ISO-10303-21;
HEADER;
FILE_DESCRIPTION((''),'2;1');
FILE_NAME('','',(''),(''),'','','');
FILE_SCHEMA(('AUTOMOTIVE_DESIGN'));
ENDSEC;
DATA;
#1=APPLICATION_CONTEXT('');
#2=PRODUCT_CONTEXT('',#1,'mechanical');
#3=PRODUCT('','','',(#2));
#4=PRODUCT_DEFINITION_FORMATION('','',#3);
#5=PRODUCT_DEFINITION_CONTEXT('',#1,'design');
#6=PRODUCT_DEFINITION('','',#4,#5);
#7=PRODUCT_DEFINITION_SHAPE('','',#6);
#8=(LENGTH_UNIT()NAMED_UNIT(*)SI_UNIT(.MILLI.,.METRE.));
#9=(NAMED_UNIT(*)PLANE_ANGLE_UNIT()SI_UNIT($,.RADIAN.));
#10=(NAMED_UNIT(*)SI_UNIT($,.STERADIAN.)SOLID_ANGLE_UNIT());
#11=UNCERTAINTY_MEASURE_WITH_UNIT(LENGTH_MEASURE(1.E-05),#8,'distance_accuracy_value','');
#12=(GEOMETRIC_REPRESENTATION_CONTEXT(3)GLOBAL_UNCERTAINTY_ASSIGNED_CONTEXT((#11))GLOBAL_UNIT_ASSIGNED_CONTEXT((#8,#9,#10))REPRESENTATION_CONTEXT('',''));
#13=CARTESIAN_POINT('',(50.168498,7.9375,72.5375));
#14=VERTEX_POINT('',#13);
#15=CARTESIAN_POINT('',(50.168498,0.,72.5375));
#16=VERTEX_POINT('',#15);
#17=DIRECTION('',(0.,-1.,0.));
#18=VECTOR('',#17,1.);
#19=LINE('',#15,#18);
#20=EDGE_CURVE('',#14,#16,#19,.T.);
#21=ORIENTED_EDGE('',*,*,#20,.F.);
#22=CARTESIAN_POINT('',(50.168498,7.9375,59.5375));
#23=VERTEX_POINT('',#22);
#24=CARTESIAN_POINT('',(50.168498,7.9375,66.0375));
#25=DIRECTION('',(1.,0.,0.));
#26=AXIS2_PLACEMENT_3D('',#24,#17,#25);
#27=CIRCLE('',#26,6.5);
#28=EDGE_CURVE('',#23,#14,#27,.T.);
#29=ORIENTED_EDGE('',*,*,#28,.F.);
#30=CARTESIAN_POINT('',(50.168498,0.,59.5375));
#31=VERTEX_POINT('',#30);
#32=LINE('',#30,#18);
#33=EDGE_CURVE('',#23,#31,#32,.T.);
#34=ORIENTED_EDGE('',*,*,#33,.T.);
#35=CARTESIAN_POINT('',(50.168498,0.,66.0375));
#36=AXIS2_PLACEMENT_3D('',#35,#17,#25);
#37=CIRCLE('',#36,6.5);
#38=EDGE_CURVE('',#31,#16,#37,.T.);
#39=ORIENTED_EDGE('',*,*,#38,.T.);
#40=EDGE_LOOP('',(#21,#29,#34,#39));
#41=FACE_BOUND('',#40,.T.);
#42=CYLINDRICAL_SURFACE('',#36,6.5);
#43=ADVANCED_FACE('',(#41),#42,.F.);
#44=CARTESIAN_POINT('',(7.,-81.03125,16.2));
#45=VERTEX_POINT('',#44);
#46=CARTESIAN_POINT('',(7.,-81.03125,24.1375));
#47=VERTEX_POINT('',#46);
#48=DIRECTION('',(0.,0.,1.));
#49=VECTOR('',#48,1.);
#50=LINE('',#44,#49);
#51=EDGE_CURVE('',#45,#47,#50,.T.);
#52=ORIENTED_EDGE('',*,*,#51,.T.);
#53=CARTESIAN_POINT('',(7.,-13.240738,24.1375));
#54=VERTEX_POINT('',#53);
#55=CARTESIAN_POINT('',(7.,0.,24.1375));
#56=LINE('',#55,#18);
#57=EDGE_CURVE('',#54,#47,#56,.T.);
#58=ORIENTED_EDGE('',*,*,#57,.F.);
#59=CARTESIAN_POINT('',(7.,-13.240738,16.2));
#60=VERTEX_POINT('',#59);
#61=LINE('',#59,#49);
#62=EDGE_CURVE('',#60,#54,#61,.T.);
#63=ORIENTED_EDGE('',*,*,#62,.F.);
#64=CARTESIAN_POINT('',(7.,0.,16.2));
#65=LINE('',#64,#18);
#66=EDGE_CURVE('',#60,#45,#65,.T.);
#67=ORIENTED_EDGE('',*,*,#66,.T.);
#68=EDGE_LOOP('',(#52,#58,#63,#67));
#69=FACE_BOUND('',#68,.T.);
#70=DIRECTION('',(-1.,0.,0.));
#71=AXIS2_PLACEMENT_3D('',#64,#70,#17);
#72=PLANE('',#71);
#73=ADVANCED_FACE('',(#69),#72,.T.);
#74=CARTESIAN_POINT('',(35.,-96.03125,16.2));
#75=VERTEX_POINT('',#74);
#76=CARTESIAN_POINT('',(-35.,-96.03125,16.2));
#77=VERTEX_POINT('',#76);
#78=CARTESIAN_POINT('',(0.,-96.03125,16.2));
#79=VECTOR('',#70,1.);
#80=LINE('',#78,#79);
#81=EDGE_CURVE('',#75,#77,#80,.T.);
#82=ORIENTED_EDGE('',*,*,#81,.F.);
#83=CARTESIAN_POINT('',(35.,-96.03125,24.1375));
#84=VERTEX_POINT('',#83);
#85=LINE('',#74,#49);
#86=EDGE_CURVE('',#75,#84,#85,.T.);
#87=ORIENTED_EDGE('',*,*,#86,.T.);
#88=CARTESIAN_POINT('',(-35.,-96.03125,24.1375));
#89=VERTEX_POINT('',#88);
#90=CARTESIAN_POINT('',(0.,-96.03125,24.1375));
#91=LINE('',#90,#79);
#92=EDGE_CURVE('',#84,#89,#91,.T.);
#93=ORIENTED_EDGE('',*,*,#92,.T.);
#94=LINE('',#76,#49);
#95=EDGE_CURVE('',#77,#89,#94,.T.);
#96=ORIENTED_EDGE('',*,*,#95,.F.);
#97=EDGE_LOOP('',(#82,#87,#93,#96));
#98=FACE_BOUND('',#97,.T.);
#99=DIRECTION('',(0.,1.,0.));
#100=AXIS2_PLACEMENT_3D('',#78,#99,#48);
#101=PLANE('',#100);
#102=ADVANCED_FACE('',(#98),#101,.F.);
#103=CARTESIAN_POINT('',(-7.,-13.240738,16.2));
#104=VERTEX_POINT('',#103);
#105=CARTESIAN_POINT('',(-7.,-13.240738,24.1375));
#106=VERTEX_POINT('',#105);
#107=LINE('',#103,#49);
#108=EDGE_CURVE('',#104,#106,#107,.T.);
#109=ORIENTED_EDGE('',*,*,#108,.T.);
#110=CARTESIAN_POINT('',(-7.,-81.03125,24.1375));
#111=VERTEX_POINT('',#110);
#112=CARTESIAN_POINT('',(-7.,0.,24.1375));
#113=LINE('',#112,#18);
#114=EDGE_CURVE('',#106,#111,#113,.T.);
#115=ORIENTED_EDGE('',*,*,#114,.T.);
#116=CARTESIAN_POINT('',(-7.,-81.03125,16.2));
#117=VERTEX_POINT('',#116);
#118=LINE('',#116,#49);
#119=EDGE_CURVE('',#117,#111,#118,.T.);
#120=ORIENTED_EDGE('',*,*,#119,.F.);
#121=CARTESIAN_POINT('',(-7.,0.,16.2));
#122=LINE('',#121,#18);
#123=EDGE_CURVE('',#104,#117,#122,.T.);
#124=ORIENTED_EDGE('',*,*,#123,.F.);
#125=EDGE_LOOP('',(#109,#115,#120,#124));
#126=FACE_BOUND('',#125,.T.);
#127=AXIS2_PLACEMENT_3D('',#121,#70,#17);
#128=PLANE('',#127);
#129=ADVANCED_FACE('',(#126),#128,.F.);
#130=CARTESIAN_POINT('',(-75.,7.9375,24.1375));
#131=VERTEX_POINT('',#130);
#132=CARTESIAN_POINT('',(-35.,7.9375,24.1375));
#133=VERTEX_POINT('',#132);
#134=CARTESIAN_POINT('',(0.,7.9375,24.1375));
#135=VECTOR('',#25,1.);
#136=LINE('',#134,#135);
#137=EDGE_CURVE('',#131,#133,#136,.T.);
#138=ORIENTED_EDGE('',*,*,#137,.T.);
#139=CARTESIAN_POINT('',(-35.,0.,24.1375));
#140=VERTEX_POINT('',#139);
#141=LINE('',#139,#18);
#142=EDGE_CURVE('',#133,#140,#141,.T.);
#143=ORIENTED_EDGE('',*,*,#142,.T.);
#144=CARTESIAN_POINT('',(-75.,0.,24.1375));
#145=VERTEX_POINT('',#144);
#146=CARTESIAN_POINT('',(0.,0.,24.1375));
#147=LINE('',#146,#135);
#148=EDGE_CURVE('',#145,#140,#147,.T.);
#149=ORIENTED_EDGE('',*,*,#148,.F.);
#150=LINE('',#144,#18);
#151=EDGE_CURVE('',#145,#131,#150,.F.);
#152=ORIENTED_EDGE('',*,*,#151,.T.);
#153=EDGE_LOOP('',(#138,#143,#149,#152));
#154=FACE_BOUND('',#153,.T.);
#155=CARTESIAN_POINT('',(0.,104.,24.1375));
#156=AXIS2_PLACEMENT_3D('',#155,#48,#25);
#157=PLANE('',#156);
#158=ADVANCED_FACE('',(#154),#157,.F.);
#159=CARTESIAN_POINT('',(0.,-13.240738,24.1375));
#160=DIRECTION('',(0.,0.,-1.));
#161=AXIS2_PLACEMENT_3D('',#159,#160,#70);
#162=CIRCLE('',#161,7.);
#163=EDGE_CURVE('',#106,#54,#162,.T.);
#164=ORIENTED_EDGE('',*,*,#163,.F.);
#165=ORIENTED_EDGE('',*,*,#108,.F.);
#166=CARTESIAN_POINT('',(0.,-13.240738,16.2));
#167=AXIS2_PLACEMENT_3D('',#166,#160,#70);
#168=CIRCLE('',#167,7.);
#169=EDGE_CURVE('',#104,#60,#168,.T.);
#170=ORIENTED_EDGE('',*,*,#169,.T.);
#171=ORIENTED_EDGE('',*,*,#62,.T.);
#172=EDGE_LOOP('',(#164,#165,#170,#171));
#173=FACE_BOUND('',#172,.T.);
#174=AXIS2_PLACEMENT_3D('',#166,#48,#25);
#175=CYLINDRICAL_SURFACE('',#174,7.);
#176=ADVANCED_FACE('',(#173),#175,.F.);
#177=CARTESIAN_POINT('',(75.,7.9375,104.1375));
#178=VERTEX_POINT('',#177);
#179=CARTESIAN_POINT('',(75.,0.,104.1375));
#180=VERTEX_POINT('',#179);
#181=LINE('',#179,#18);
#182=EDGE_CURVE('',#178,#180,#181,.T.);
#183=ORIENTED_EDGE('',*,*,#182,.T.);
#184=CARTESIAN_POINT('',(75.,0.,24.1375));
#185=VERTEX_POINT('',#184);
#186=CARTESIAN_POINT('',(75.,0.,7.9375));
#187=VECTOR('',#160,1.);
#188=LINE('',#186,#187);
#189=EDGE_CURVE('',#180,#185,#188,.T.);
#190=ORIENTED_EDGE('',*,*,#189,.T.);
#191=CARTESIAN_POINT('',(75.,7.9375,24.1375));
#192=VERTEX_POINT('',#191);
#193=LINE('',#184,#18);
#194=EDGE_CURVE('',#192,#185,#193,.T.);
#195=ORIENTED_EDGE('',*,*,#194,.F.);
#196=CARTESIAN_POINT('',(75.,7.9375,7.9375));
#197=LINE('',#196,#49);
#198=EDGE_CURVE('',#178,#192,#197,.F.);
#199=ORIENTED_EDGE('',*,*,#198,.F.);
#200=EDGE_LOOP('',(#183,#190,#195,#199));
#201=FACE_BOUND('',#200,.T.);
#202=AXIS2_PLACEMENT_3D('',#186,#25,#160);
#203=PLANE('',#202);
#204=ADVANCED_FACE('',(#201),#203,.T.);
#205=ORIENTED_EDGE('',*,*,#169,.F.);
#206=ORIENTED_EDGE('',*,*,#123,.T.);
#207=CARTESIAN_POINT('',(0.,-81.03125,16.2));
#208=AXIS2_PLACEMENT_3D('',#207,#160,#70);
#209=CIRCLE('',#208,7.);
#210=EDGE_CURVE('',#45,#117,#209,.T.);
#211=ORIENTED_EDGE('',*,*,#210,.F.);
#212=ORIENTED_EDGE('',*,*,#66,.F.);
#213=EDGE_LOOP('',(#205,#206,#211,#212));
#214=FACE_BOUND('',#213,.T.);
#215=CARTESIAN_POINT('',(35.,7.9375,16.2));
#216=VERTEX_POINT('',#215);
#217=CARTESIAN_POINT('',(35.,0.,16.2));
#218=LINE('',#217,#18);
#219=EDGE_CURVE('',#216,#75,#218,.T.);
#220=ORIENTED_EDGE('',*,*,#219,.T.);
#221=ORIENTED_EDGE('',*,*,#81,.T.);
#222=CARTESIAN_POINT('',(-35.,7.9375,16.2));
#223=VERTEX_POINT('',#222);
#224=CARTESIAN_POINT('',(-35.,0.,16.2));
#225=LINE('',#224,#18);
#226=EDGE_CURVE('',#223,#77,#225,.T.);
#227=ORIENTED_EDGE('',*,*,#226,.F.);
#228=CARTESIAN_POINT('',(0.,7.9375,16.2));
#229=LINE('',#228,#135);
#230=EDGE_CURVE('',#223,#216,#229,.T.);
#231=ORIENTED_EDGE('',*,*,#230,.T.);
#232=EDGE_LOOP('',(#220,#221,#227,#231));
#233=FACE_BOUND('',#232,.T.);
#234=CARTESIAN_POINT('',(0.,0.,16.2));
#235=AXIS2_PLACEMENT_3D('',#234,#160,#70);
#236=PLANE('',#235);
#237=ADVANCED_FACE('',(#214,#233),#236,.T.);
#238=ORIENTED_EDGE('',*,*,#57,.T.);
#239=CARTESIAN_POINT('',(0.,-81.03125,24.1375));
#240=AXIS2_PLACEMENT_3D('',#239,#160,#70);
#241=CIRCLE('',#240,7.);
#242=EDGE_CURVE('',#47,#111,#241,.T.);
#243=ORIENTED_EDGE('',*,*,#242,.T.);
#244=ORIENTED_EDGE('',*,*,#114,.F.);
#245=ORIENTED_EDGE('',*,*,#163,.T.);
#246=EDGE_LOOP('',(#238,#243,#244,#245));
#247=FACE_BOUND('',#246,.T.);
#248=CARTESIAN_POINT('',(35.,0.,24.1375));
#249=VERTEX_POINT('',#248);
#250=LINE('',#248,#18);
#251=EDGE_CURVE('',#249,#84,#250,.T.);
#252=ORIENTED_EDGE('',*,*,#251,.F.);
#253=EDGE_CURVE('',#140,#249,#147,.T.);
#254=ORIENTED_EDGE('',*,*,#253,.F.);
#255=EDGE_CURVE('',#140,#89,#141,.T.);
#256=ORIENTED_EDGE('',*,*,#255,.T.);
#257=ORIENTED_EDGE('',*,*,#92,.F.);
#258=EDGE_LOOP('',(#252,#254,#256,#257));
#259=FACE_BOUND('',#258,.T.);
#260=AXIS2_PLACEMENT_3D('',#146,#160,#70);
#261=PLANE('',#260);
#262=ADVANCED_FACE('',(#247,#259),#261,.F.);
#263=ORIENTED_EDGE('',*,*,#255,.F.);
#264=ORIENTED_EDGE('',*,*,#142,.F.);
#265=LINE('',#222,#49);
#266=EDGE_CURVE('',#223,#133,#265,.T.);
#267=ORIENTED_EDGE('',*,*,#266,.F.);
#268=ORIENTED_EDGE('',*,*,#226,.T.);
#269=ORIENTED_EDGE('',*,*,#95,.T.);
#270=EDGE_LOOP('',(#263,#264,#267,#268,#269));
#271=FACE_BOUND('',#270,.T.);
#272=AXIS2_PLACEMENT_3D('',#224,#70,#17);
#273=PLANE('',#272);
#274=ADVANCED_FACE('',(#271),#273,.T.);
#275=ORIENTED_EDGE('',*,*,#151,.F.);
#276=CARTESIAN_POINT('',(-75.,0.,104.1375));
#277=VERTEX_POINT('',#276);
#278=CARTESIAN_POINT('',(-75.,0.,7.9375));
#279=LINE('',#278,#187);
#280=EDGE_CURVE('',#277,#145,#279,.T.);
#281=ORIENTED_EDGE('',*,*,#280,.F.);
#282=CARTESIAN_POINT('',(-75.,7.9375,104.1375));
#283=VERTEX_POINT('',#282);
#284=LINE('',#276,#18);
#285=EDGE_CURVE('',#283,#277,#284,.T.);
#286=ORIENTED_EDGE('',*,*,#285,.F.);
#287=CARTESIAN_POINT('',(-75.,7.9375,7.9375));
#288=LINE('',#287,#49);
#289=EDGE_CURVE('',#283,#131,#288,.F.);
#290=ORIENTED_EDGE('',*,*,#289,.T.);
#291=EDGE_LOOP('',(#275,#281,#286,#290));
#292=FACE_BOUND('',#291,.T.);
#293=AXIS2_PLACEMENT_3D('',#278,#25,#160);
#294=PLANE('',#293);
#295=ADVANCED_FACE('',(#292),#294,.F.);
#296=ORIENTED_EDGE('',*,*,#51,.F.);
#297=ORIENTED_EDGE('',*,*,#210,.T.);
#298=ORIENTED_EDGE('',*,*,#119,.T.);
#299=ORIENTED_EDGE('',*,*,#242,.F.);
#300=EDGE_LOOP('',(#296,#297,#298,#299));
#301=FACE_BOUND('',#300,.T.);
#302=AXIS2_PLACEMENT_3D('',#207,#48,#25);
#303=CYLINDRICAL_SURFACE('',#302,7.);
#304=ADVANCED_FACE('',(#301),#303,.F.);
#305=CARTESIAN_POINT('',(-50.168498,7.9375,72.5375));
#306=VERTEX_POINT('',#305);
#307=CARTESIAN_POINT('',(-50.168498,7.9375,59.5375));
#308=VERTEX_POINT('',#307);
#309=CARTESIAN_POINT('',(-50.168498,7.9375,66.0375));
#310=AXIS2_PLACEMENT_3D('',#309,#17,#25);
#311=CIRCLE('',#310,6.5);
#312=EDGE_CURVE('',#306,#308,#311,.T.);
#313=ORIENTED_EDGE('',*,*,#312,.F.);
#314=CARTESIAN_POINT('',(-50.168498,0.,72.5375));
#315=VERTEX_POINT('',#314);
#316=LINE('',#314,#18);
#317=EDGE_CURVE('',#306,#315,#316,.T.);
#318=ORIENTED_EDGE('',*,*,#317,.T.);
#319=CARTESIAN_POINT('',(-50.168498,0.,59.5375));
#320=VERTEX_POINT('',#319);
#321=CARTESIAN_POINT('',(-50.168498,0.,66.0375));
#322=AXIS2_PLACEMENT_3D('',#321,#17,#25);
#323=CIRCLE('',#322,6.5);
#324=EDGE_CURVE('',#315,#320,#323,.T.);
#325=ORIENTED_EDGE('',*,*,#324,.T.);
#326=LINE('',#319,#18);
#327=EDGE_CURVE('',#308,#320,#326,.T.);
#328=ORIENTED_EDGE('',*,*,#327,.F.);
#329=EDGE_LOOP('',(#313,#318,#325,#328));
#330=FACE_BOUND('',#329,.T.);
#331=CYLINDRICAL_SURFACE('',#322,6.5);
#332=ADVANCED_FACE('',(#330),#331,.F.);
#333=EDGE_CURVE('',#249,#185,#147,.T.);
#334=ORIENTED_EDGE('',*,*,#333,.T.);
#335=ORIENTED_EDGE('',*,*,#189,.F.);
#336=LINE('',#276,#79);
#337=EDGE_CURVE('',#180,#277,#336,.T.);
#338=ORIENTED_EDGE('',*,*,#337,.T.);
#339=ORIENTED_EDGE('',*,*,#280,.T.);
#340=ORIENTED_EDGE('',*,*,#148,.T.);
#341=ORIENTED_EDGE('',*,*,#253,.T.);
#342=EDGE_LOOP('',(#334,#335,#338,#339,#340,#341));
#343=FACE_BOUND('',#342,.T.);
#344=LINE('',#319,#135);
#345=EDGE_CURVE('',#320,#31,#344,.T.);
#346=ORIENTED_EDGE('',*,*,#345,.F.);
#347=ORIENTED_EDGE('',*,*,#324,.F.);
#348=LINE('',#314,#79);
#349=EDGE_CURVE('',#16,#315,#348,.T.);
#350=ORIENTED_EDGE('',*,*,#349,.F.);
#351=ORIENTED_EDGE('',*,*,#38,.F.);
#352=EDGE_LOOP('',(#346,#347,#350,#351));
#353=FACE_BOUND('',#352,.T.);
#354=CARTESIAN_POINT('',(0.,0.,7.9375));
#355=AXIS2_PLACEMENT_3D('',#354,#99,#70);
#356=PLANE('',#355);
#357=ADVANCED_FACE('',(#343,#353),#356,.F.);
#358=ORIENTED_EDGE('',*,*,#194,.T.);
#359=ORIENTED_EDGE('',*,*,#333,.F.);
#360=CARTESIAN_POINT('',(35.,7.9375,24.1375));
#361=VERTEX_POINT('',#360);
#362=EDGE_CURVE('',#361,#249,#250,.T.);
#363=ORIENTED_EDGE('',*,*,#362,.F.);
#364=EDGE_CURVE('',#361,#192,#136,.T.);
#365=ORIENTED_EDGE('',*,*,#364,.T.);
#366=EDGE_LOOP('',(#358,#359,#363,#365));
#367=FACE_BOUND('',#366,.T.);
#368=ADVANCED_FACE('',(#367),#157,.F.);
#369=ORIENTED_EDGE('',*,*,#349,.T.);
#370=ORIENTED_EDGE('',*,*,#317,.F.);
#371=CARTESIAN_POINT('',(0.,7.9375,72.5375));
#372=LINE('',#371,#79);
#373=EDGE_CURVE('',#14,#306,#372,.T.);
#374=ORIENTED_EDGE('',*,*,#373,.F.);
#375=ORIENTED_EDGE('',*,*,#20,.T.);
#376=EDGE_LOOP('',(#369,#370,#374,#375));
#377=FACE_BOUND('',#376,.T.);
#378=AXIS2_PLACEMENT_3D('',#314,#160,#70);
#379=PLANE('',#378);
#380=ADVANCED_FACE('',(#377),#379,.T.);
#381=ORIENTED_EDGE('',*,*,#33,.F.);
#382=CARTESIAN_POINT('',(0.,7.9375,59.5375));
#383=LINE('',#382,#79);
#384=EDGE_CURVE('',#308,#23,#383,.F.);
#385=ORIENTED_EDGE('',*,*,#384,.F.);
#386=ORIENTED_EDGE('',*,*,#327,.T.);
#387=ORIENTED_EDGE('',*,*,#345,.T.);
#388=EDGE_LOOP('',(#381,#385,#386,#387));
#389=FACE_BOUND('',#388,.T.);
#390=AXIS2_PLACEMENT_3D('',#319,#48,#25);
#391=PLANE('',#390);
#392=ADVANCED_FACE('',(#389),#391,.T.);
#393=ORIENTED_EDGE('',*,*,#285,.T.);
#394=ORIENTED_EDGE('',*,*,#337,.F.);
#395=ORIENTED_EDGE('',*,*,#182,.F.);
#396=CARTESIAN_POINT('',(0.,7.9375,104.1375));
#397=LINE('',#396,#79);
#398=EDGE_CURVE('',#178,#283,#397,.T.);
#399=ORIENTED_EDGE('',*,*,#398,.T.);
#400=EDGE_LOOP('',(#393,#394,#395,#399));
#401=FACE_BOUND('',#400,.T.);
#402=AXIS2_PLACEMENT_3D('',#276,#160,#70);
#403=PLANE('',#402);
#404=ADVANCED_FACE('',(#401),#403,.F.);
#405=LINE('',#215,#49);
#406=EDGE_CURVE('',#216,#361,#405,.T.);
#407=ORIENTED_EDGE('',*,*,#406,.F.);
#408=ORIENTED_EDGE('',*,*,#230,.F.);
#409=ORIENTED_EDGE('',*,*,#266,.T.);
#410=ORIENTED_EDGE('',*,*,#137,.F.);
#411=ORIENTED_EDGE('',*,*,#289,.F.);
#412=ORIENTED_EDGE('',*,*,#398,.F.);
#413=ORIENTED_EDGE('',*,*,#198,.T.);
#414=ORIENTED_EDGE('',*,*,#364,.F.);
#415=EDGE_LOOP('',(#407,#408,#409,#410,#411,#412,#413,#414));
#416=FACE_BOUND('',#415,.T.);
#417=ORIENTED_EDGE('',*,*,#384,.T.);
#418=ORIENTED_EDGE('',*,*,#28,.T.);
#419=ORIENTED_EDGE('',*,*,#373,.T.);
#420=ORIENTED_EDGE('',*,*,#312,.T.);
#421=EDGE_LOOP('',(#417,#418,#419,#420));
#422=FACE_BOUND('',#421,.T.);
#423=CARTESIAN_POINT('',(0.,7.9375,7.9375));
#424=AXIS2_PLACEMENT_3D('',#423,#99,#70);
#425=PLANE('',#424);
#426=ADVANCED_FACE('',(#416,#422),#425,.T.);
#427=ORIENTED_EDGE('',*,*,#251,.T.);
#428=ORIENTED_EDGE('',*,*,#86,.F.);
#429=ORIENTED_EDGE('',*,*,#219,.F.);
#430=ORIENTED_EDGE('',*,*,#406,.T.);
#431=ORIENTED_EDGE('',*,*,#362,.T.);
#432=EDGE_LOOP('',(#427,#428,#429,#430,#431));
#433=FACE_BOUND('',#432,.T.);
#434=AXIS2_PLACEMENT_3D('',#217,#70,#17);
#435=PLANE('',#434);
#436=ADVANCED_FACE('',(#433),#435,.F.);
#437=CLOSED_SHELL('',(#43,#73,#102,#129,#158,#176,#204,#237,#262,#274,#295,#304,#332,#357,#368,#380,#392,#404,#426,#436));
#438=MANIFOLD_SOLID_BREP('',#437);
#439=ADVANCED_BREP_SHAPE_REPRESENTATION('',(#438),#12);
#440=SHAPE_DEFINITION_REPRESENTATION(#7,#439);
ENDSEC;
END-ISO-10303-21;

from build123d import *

# Parameters (mm, degrees)
CROQUIS1_R                 = 6.35
CROQUIS1_R_2               = 6.26
CROQUIS1_R_3               = 6.25
SALIENTE_EXTRUIR1_DEPTH    = 7.9375
CROQUIS2_W                 = 150
CROQUIS2_H                 = 104.1375
SALIENTE_EXTRUIR2_DEPTH    = 7.9375
CONVERTIR_S_LIDO4_START    = -75
CONVERTIR_S_LIDO4_DEPTH    = 150
CONVERTIR_S_LIDO4_2_DEPTH  = 150
CORTAR_EXTRUIR4_DEPTH      = 369.571050011
CORTAR_EXTRUIR4_DEPTH_BACK = 369.571050011
CROQUIS4_W                 = 150
CROQUIS4_H                 = 11.2
CROQUIS7_W                 = 70
CROQUIS7_H                 = 96.03125
CROQUIS7_H_2               = 7.9375
SALIENTE_EXTRUIR3_DEPTH    = 7.9375


# Read off the part's stored shape, not the designer's step: Convertir-Sólido4
with BuildPart() as part:
    # Croquis1 → Saliente-Extruir1 (new body)
    with BuildSketch(Plane.XY):
        with BuildLine():
            Line((-75, 16), (-75, 0))
            Line((-75, 0), (75, 0))
            Line((75, 0), (75, 54))
            ThreePointArc((75, 54), (60.355339059, 89.355339059), (25, 104))
            Line((25, 104), (-200, 104))
            ThreePointArc((-200, 104), (-235.355339059, 89.355339059), (-250, 54))
            Line((-250, 54), (-250, 0))
            ThreePointArc((-250, 0), (0, -250), (250, 0))
            ThreePointArc((250, 0), (200, 50), (150, 0))
            ThreePointArc((150, 0), (0, -150), (-150, 0))
            Line((-150, 0), (-150, 16))
            Line((-150, 16), (-75, 16))
        make_face()
        with BuildLine():
            ThreePointArc((-49.374105038, 47.65), (-55.724105038, 54), (-49.374105038, 60.35))
            Line((-49.374105038, 60.35), (49.374105038, 60.35))
            ThreePointArc((49.374105038, 60.35), (55.724105038, 54), (49.374105038, 47.65))
            Line((49.374105038, 47.65), (-49.374105038, 47.65))
        make_face(mode=Mode.SUBTRACT)
        with Locations((193.418858597, -50.883643138)):
            Circle(CROQUIS1_R, mode=Mode.SUBTRACT)
        with Locations((200, 0)):
            Circle(CROQUIS1_R_2, mode=Mode.SUBTRACT)
        with Locations((-100, -173.205080757)):
            Circle(CROQUIS1_R_3, mode=Mode.SUBTRACT)
        with Locations((-50.883643138, -193.418858597)):
            Circle(CROQUIS1_R, mode=Mode.SUBTRACT)
        with Locations((-140.775956893, -142.063823547)):
            Circle(CROQUIS1_R, mode=Mode.SUBTRACT)
        with Locations((-173.205080757, -100)):
            Circle(CROQUIS1_R, mode=Mode.SUBTRACT)
        with Locations((0, -200)):
            Circle(CROQUIS1_R_3, mode=Mode.SUBTRACT)
        with Locations((52.642901704, -192.947466685)):
            Circle(CROQUIS1_R, mode=Mode.SUBTRACT)
        with Locations((100, -173.205080757)):
            Circle(CROQUIS1_R_3, mode=Mode.SUBTRACT)
        with Locations((142.063823547, -140.775956893)):
            Circle(CROQUIS1_R, mode=Mode.SUBTRACT)
        with Locations((173.205080757, -100)):
            Circle(CROQUIS1_R_3, mode=Mode.SUBTRACT)
        with Locations((-192.947466685, -52.642901704)):
            Circle(CROQUIS1_R, mode=Mode.SUBTRACT)
        with Locations((-200, 0)):
            Circle(CROQUIS1_R, mode=Mode.SUBTRACT)
        with Locations((-200, 54)):
            Circle(CROQUIS1_R, mode=Mode.SUBTRACT)
    extrude(amount=SALIENTE_EXTRUIR1_DEPTH)

    # Croquis2 → Saliente-Extruir2 (add)
    with BuildSketch(Plane.XZ):
        with Locations((0, 52.06875)):
            Rectangle(CROQUIS2_W, CROQUIS2_H)
        with BuildLine():
            Line((-50.16849794, 72.5375), (50.16849794, 72.5375))
            ThreePointArc((50.16849794, 72.5375), (56.66849794, 66.0375), (50.16849794, 59.5375))
            Line((50.16849794, 59.5375), (-50.16849794, 59.5375))
            ThreePointArc((-50.16849794, 59.5375), (-56.66849794, 66.0375), (-50.16849794, 72.5375))
        make_face(mode=Mode.SUBTRACT)
    extrude(amount=-SALIENTE_EXTRUIR2_DEPTH)

    # Convertir-Sólido4 outline → Convertir-Sólido4 (cut)
    with BuildSketch(Plane.YZ.offset(CONVERTIR_S_LIDO4_START)):
        with BuildLine():
            Line((0, 12.9375), (0, 0))
            Line((0, 0), (12.9375, 0))
            ThreePointArc((12.9375, 0), (3.789306018, 3.789306018), (0, 12.9375))
        make_face()
    extrude(amount=CONVERTIR_S_LIDO4_DEPTH, mode=Mode.SUBTRACT)

    # Convertir-S_lido4 2 outline → Convertir-S_lido4 2 (add)
    with BuildSketch(Plane.YZ.offset(CONVERTIR_S_LIDO4_START)):
        with BuildLine():
            Line((7.9375, 12.9375), (7.9375, 7.9375))
            Line((7.9375, 7.9375), (12.9375, 7.9375))
            ThreePointArc((12.9375, 7.9375), (9.401966094, 9.401966094), (7.9375, 12.9375))
        make_face()
    extrude(amount=CONVERTIR_S_LIDO4_2_DEPTH)

    # Croquis4 → Cortar-Extruir4 (cut, two sides: drawn at the far end of the back side and taken through both)
    with BuildSketch(Plane.XZ.offset(-CORTAR_EXTRUIR4_DEPTH_BACK)):
        Polygon((-75, 12.9375), (-75, 24.1375), (-279.933014074, 24.1375), (-279.933014074, -40.537488795), (278.241575923, -40.537488795), (278.241575923, 24.1375), (75, 24.1375), (75, 12.9375), align=None)
        with Locations((0, 18.5375)):
            Rectangle(CROQUIS4_W, CROQUIS4_H)
    extrude(amount=CORTAR_EXTRUIR4_DEPTH + CORTAR_EXTRUIR4_DEPTH_BACK, mode=Mode.SUBTRACT)

    # Croquis7 → Saliente-Extruir3 (add)
    # profile 1 of 2: a face of its own
    with BuildSketch(Plane(origin=(0, 0, 24.1375), x_dir=(-1, 0, 0), z_dir=(0, 0, -1))):
        with Locations((0, -48.015625)):
            Rectangle(CROQUIS7_W, CROQUIS7_H)
        with BuildLine():
            ThreePointArc((-7, -13.240738452), (0, -6.240738452), (7, -13.240738452))
            Line((7, -13.240738452), (7, -81.03125))
            ThreePointArc((7, -81.03125), (0, -88.03125), (-7, -81.03125))
            Line((-7, -81.03125), (-7, -13.240738452))
        make_face(mode=Mode.SUBTRACT)
    # profile 2 of 2: a face of its own
    with BuildSketch(Plane(origin=(0, 0, 24.1375), x_dir=(-1, 0, 0), z_dir=(0, 0, -1))):
        with Locations((0, 3.96875)):
            Rectangle(CROQUIS7_W, CROQUIS7_H_2)
    extrude(amount=SALIENTE_EXTRUIR3_DEPTH)


solid = part.part
